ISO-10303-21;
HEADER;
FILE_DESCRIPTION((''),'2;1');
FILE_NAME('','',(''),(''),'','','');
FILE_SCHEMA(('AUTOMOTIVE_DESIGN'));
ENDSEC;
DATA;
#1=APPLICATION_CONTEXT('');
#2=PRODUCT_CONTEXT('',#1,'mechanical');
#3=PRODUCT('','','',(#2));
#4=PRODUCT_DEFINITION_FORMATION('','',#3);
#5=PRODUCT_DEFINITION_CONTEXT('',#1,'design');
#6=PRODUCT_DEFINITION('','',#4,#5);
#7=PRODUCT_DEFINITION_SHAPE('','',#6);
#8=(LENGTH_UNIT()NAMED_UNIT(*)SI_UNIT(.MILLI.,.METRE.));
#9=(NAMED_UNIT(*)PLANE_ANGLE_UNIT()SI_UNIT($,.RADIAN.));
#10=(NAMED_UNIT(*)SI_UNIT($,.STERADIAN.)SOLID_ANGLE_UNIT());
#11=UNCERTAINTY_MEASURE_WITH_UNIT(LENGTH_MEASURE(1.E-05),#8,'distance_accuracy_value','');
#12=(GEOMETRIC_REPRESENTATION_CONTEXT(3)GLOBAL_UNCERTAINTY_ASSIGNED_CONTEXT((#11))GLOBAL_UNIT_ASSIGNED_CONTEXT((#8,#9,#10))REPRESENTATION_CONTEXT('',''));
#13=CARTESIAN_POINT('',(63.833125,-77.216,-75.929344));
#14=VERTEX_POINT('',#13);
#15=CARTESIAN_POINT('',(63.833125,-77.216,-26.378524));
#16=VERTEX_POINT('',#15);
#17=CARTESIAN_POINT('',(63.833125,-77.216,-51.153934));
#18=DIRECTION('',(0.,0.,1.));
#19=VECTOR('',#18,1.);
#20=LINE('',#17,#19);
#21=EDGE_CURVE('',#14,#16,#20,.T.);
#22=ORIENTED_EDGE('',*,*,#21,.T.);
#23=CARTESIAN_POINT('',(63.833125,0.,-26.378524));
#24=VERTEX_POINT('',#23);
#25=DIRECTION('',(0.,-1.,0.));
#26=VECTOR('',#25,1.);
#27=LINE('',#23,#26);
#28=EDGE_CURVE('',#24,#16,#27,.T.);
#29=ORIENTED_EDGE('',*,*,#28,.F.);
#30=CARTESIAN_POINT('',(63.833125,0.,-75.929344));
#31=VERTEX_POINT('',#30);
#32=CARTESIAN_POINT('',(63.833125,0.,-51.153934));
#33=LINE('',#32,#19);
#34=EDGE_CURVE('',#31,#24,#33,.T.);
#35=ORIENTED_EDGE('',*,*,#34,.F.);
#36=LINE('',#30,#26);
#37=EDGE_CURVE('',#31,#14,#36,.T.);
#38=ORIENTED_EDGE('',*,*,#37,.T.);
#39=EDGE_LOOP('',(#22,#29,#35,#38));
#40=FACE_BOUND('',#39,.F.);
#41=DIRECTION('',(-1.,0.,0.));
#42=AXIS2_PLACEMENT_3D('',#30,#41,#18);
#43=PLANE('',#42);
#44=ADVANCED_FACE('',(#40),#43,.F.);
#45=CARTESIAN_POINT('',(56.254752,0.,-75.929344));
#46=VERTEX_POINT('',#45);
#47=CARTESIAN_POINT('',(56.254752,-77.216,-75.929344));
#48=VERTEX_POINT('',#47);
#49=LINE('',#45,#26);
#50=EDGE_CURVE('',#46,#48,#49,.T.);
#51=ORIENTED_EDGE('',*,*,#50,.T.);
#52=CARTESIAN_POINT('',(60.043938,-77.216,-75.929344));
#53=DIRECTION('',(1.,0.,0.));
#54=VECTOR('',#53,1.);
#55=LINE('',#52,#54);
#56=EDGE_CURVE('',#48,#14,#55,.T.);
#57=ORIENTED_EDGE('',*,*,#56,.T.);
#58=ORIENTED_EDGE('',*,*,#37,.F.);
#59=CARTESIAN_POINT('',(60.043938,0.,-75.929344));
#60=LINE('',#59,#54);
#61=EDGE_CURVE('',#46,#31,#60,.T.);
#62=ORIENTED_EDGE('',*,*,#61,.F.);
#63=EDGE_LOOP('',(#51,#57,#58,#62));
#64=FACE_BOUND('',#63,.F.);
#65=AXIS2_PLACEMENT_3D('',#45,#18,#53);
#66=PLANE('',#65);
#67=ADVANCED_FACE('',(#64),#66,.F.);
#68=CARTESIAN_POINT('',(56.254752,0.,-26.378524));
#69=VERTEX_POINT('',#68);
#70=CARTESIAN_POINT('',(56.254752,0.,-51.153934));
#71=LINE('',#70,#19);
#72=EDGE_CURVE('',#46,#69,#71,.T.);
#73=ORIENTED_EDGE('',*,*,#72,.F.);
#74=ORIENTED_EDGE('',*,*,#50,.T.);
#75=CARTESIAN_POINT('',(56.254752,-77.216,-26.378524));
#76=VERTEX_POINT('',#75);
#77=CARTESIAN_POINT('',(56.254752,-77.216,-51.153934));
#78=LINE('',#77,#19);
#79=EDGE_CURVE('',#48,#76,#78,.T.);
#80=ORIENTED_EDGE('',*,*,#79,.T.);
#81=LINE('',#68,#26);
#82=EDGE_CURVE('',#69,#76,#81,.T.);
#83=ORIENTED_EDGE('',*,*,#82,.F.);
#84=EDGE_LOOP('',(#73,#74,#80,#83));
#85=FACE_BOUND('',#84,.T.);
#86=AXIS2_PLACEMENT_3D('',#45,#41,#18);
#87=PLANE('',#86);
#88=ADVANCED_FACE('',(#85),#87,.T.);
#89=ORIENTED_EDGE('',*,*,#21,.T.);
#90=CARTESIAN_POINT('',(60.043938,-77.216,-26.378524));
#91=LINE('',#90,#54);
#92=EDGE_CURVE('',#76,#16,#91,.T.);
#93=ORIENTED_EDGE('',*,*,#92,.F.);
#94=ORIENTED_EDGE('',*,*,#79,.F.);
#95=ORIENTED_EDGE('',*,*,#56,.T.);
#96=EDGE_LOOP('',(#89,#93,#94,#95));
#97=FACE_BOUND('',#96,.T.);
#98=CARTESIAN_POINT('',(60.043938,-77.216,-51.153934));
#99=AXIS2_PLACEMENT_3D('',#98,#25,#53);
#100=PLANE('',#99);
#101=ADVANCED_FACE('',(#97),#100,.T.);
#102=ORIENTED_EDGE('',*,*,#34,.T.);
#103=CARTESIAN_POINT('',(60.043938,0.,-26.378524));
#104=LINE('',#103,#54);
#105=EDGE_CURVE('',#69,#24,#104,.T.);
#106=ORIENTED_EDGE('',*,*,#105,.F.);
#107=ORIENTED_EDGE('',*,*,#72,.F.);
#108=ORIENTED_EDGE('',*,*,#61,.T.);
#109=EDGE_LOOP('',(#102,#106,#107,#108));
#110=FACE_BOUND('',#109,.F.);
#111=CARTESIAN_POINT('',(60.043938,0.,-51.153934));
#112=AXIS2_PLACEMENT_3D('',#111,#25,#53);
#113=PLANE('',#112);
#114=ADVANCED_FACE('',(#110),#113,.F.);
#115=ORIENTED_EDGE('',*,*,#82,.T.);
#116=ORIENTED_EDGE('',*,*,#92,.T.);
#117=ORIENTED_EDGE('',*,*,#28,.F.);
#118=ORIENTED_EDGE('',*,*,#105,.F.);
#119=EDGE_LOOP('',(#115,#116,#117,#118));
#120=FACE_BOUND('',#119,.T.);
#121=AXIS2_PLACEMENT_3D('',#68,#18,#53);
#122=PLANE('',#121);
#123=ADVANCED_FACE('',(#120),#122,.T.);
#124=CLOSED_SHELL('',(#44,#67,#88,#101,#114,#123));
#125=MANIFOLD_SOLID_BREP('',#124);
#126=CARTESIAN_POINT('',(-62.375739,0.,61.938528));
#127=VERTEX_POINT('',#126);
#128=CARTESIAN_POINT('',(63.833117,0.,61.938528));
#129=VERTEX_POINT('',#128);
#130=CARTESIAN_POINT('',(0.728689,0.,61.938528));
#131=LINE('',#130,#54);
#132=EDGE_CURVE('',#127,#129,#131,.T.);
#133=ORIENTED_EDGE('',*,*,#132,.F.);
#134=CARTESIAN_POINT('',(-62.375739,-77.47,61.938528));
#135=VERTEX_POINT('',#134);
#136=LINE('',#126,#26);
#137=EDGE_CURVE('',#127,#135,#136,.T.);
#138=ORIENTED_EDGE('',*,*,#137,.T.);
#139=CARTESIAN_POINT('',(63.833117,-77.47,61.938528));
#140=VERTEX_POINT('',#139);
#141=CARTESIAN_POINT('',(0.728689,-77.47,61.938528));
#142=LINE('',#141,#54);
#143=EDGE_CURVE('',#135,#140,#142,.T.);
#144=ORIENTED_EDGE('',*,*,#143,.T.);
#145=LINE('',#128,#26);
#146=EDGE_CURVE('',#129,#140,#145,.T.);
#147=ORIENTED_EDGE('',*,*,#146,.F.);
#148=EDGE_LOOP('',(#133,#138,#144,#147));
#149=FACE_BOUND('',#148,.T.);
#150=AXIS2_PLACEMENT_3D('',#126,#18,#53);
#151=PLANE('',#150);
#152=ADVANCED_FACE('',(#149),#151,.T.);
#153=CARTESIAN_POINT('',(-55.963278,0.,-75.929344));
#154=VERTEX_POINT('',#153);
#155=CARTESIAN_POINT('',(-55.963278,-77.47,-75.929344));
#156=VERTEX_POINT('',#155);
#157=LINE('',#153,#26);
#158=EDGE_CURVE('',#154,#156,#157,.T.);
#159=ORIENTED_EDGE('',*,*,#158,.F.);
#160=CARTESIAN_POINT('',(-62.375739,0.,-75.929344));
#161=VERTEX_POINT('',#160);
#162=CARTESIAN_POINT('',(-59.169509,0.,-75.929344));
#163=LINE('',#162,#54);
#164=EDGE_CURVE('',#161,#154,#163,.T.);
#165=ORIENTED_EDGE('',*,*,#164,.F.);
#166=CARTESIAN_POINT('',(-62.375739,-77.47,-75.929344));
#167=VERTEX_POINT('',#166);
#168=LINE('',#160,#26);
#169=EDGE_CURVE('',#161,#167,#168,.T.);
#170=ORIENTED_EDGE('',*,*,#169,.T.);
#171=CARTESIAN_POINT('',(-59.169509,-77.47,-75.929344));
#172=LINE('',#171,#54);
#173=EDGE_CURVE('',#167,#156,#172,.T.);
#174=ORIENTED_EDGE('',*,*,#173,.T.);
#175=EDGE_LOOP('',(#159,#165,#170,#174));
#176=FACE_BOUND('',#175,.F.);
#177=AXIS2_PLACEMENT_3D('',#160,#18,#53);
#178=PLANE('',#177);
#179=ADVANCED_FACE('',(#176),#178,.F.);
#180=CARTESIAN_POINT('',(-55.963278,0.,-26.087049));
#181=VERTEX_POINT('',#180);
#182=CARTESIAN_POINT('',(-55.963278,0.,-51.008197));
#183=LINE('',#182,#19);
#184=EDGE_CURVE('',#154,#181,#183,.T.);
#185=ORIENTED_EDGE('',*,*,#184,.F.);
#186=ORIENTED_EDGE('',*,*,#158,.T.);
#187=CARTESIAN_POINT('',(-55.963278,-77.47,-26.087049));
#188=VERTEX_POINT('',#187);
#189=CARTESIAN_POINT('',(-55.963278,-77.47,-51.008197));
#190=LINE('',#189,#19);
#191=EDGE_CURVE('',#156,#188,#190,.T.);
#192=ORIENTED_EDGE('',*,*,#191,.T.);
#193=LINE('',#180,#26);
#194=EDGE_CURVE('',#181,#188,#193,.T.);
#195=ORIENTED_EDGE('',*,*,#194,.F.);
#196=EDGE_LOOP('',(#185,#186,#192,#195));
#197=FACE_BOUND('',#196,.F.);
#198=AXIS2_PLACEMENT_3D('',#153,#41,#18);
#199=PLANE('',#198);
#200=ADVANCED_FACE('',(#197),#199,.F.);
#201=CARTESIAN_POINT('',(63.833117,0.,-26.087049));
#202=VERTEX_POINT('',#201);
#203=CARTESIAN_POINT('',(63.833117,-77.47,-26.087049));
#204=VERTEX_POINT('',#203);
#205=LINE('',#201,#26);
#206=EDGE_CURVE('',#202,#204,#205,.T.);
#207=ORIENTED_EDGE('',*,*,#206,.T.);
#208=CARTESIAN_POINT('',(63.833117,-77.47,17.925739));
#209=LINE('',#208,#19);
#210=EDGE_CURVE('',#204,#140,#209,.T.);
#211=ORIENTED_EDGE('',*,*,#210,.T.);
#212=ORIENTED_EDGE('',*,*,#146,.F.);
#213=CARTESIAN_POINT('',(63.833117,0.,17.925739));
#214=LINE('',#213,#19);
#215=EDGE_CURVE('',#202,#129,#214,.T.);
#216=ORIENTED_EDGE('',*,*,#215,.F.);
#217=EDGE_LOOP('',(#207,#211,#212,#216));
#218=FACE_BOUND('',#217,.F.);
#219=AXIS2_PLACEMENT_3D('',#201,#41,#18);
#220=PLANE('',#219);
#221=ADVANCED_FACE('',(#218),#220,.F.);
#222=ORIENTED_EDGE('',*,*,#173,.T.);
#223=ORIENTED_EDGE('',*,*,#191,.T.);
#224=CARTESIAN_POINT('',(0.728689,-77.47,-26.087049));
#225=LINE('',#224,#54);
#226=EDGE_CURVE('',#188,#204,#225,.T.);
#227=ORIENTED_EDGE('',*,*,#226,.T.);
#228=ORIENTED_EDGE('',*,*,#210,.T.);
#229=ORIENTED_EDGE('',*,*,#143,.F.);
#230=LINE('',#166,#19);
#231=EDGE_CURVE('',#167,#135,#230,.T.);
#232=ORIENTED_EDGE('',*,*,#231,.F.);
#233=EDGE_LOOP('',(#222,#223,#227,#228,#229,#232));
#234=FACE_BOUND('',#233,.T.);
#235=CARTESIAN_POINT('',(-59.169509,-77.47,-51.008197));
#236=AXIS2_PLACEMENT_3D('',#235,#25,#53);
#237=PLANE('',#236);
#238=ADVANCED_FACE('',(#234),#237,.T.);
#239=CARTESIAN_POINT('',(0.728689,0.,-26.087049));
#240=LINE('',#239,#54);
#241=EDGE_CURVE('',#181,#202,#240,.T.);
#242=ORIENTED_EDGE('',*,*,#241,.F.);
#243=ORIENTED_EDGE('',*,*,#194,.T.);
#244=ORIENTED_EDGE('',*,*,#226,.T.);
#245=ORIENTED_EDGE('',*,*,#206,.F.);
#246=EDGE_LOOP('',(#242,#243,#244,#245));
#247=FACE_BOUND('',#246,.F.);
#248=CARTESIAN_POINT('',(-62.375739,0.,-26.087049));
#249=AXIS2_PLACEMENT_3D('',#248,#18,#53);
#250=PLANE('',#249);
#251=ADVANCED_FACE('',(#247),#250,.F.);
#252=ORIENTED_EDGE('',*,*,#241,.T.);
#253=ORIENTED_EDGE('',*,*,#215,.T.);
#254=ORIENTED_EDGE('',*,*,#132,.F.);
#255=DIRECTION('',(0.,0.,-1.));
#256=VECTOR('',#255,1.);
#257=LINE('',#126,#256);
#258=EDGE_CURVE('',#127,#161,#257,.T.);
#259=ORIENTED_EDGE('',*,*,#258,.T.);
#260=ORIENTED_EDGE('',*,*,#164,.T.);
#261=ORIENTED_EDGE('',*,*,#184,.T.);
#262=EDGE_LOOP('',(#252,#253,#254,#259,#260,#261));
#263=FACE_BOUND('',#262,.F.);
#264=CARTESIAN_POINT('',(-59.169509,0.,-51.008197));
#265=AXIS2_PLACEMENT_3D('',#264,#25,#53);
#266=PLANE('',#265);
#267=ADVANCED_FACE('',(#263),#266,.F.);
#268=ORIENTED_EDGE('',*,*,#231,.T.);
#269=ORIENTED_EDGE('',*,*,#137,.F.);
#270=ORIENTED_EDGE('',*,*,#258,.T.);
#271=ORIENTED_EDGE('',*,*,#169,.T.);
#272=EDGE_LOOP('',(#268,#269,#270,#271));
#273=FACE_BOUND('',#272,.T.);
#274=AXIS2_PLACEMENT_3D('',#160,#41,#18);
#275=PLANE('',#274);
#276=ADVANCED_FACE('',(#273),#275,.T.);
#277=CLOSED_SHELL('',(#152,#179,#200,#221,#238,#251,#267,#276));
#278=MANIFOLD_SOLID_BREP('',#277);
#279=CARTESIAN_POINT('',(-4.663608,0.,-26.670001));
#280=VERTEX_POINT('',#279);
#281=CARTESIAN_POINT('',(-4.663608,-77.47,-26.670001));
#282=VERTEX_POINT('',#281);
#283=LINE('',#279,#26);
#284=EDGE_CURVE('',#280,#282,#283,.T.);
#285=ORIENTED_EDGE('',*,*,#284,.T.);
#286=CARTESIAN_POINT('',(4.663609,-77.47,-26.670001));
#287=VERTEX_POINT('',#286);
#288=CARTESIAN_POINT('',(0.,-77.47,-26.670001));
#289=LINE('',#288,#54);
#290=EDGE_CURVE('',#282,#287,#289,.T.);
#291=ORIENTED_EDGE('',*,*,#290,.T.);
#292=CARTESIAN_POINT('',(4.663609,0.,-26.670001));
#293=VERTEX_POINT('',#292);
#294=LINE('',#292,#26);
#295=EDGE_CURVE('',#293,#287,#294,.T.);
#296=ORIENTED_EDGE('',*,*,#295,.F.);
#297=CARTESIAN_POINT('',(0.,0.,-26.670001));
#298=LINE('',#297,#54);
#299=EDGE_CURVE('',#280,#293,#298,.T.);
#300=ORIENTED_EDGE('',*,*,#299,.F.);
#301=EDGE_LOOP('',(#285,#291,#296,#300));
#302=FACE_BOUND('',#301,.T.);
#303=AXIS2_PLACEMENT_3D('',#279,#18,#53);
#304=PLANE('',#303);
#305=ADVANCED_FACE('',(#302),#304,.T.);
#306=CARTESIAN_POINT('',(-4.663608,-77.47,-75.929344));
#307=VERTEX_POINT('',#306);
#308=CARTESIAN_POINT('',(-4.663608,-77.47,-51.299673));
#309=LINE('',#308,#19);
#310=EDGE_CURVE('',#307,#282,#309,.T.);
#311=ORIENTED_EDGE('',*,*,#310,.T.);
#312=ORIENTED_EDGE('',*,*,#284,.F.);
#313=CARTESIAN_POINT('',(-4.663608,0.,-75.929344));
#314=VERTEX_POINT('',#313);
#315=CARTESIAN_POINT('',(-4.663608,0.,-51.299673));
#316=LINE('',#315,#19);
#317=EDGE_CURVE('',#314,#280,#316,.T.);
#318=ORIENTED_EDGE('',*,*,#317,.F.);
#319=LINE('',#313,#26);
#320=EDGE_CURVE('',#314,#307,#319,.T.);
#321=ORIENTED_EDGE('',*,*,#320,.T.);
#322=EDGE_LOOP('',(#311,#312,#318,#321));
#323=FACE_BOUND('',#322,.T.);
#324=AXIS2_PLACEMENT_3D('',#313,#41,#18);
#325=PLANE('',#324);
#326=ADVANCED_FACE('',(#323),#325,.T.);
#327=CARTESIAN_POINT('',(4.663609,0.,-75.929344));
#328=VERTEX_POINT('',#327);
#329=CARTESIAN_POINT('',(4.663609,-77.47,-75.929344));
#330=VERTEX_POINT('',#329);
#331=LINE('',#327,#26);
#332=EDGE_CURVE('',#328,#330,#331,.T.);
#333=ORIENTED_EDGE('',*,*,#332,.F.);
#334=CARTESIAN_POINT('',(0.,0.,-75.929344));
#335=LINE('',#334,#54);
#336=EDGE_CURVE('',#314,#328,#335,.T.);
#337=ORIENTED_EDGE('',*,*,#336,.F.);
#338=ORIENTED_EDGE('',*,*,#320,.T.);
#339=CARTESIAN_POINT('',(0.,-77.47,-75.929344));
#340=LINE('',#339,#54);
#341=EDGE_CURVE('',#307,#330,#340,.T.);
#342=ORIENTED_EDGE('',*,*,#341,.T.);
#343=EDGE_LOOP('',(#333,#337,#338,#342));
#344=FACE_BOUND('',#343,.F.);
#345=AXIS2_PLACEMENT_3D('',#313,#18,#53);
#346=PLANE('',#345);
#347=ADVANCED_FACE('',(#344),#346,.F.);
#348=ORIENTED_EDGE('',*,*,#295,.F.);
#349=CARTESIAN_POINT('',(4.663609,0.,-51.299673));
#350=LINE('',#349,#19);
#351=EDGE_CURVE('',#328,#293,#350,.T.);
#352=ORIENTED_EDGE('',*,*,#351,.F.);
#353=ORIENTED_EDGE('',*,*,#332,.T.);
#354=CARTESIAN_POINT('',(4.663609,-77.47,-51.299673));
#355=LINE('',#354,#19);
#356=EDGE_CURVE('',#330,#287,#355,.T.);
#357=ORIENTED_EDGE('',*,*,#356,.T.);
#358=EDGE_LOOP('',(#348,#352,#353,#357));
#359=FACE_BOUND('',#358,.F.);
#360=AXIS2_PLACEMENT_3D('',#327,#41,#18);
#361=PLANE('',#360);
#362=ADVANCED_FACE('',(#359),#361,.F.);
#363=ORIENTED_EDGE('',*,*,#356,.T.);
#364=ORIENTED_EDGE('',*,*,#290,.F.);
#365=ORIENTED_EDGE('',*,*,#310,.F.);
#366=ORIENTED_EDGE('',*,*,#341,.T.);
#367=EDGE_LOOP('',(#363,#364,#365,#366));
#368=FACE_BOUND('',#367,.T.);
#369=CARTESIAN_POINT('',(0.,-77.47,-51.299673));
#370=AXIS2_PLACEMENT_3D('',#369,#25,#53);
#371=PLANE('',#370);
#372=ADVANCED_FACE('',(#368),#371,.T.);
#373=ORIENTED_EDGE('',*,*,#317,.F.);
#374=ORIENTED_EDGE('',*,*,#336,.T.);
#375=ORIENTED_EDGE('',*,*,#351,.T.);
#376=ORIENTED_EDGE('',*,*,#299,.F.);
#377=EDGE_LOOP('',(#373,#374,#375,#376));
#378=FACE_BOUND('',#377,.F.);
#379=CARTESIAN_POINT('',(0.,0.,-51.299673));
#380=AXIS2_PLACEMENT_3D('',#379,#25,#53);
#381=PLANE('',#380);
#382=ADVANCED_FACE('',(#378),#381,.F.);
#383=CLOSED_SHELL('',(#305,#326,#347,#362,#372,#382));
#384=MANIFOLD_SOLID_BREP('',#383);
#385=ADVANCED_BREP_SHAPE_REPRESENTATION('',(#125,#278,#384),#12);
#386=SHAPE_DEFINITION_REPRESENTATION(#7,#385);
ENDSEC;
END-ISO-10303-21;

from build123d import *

# Parameters (mm, degrees)
F0_W     = 126.2088567019
F0_H     = 88.0255773664
F1_DEPTH = 77.47
F2_W     = 6.4124614
F2_H     = 49.8422943056
F4_DEPTH = 77.47
F2_W_2   = 9.3272165395
F2_H_2   = 49.2593422532
F5_DEPTH = 77.47
F2_W_3   = 7.5783729553
F2_H_3   = 49.550820142
F6_DEPTH = 77.216


# Not quite as in the source:
# - the program builds the solid bodies; features that only make, move or delete a surface that nothing else refers to are left out


with BuildPart() as f1:
    # F0 (on Front) → F1 (new body)
    with BuildSketch(Plane.XZ):
        with Locations((0.7286891341, 17.9257392883)):
            Rectangle(F0_W, F0_H)
    extrude(amount=F1_DEPTH)

    # F2 (on Front) → F4 (join)
    with BuildSketch(Plane.XZ):
        with Locations((-59.1695085168, -51.0081965476)):
            Rectangle(F2_W, F2_H)
    extrude(amount=F4_DEPTH)


with BuildPart() as f5:
    # F2 (on Front) → F5 (new body)
    with BuildSketch(Plane.XZ):
        with Locations((2.328e-07, -51.2996725738)):
            Rectangle(F2_W_2, F2_H_2)
    extrude(amount=F5_DEPTH)


with BuildPart() as f6:
    # F2 (on Front) → F6 (new body)
    with BuildSketch(Plane.XZ):
        with Locations((60.043938458, -51.1539336294)):
            Rectangle(F2_W_3, F2_H_3)
    extrude(amount=F6_DEPTH)


solid = Compound([f1.part, f5.part, f6.part])
